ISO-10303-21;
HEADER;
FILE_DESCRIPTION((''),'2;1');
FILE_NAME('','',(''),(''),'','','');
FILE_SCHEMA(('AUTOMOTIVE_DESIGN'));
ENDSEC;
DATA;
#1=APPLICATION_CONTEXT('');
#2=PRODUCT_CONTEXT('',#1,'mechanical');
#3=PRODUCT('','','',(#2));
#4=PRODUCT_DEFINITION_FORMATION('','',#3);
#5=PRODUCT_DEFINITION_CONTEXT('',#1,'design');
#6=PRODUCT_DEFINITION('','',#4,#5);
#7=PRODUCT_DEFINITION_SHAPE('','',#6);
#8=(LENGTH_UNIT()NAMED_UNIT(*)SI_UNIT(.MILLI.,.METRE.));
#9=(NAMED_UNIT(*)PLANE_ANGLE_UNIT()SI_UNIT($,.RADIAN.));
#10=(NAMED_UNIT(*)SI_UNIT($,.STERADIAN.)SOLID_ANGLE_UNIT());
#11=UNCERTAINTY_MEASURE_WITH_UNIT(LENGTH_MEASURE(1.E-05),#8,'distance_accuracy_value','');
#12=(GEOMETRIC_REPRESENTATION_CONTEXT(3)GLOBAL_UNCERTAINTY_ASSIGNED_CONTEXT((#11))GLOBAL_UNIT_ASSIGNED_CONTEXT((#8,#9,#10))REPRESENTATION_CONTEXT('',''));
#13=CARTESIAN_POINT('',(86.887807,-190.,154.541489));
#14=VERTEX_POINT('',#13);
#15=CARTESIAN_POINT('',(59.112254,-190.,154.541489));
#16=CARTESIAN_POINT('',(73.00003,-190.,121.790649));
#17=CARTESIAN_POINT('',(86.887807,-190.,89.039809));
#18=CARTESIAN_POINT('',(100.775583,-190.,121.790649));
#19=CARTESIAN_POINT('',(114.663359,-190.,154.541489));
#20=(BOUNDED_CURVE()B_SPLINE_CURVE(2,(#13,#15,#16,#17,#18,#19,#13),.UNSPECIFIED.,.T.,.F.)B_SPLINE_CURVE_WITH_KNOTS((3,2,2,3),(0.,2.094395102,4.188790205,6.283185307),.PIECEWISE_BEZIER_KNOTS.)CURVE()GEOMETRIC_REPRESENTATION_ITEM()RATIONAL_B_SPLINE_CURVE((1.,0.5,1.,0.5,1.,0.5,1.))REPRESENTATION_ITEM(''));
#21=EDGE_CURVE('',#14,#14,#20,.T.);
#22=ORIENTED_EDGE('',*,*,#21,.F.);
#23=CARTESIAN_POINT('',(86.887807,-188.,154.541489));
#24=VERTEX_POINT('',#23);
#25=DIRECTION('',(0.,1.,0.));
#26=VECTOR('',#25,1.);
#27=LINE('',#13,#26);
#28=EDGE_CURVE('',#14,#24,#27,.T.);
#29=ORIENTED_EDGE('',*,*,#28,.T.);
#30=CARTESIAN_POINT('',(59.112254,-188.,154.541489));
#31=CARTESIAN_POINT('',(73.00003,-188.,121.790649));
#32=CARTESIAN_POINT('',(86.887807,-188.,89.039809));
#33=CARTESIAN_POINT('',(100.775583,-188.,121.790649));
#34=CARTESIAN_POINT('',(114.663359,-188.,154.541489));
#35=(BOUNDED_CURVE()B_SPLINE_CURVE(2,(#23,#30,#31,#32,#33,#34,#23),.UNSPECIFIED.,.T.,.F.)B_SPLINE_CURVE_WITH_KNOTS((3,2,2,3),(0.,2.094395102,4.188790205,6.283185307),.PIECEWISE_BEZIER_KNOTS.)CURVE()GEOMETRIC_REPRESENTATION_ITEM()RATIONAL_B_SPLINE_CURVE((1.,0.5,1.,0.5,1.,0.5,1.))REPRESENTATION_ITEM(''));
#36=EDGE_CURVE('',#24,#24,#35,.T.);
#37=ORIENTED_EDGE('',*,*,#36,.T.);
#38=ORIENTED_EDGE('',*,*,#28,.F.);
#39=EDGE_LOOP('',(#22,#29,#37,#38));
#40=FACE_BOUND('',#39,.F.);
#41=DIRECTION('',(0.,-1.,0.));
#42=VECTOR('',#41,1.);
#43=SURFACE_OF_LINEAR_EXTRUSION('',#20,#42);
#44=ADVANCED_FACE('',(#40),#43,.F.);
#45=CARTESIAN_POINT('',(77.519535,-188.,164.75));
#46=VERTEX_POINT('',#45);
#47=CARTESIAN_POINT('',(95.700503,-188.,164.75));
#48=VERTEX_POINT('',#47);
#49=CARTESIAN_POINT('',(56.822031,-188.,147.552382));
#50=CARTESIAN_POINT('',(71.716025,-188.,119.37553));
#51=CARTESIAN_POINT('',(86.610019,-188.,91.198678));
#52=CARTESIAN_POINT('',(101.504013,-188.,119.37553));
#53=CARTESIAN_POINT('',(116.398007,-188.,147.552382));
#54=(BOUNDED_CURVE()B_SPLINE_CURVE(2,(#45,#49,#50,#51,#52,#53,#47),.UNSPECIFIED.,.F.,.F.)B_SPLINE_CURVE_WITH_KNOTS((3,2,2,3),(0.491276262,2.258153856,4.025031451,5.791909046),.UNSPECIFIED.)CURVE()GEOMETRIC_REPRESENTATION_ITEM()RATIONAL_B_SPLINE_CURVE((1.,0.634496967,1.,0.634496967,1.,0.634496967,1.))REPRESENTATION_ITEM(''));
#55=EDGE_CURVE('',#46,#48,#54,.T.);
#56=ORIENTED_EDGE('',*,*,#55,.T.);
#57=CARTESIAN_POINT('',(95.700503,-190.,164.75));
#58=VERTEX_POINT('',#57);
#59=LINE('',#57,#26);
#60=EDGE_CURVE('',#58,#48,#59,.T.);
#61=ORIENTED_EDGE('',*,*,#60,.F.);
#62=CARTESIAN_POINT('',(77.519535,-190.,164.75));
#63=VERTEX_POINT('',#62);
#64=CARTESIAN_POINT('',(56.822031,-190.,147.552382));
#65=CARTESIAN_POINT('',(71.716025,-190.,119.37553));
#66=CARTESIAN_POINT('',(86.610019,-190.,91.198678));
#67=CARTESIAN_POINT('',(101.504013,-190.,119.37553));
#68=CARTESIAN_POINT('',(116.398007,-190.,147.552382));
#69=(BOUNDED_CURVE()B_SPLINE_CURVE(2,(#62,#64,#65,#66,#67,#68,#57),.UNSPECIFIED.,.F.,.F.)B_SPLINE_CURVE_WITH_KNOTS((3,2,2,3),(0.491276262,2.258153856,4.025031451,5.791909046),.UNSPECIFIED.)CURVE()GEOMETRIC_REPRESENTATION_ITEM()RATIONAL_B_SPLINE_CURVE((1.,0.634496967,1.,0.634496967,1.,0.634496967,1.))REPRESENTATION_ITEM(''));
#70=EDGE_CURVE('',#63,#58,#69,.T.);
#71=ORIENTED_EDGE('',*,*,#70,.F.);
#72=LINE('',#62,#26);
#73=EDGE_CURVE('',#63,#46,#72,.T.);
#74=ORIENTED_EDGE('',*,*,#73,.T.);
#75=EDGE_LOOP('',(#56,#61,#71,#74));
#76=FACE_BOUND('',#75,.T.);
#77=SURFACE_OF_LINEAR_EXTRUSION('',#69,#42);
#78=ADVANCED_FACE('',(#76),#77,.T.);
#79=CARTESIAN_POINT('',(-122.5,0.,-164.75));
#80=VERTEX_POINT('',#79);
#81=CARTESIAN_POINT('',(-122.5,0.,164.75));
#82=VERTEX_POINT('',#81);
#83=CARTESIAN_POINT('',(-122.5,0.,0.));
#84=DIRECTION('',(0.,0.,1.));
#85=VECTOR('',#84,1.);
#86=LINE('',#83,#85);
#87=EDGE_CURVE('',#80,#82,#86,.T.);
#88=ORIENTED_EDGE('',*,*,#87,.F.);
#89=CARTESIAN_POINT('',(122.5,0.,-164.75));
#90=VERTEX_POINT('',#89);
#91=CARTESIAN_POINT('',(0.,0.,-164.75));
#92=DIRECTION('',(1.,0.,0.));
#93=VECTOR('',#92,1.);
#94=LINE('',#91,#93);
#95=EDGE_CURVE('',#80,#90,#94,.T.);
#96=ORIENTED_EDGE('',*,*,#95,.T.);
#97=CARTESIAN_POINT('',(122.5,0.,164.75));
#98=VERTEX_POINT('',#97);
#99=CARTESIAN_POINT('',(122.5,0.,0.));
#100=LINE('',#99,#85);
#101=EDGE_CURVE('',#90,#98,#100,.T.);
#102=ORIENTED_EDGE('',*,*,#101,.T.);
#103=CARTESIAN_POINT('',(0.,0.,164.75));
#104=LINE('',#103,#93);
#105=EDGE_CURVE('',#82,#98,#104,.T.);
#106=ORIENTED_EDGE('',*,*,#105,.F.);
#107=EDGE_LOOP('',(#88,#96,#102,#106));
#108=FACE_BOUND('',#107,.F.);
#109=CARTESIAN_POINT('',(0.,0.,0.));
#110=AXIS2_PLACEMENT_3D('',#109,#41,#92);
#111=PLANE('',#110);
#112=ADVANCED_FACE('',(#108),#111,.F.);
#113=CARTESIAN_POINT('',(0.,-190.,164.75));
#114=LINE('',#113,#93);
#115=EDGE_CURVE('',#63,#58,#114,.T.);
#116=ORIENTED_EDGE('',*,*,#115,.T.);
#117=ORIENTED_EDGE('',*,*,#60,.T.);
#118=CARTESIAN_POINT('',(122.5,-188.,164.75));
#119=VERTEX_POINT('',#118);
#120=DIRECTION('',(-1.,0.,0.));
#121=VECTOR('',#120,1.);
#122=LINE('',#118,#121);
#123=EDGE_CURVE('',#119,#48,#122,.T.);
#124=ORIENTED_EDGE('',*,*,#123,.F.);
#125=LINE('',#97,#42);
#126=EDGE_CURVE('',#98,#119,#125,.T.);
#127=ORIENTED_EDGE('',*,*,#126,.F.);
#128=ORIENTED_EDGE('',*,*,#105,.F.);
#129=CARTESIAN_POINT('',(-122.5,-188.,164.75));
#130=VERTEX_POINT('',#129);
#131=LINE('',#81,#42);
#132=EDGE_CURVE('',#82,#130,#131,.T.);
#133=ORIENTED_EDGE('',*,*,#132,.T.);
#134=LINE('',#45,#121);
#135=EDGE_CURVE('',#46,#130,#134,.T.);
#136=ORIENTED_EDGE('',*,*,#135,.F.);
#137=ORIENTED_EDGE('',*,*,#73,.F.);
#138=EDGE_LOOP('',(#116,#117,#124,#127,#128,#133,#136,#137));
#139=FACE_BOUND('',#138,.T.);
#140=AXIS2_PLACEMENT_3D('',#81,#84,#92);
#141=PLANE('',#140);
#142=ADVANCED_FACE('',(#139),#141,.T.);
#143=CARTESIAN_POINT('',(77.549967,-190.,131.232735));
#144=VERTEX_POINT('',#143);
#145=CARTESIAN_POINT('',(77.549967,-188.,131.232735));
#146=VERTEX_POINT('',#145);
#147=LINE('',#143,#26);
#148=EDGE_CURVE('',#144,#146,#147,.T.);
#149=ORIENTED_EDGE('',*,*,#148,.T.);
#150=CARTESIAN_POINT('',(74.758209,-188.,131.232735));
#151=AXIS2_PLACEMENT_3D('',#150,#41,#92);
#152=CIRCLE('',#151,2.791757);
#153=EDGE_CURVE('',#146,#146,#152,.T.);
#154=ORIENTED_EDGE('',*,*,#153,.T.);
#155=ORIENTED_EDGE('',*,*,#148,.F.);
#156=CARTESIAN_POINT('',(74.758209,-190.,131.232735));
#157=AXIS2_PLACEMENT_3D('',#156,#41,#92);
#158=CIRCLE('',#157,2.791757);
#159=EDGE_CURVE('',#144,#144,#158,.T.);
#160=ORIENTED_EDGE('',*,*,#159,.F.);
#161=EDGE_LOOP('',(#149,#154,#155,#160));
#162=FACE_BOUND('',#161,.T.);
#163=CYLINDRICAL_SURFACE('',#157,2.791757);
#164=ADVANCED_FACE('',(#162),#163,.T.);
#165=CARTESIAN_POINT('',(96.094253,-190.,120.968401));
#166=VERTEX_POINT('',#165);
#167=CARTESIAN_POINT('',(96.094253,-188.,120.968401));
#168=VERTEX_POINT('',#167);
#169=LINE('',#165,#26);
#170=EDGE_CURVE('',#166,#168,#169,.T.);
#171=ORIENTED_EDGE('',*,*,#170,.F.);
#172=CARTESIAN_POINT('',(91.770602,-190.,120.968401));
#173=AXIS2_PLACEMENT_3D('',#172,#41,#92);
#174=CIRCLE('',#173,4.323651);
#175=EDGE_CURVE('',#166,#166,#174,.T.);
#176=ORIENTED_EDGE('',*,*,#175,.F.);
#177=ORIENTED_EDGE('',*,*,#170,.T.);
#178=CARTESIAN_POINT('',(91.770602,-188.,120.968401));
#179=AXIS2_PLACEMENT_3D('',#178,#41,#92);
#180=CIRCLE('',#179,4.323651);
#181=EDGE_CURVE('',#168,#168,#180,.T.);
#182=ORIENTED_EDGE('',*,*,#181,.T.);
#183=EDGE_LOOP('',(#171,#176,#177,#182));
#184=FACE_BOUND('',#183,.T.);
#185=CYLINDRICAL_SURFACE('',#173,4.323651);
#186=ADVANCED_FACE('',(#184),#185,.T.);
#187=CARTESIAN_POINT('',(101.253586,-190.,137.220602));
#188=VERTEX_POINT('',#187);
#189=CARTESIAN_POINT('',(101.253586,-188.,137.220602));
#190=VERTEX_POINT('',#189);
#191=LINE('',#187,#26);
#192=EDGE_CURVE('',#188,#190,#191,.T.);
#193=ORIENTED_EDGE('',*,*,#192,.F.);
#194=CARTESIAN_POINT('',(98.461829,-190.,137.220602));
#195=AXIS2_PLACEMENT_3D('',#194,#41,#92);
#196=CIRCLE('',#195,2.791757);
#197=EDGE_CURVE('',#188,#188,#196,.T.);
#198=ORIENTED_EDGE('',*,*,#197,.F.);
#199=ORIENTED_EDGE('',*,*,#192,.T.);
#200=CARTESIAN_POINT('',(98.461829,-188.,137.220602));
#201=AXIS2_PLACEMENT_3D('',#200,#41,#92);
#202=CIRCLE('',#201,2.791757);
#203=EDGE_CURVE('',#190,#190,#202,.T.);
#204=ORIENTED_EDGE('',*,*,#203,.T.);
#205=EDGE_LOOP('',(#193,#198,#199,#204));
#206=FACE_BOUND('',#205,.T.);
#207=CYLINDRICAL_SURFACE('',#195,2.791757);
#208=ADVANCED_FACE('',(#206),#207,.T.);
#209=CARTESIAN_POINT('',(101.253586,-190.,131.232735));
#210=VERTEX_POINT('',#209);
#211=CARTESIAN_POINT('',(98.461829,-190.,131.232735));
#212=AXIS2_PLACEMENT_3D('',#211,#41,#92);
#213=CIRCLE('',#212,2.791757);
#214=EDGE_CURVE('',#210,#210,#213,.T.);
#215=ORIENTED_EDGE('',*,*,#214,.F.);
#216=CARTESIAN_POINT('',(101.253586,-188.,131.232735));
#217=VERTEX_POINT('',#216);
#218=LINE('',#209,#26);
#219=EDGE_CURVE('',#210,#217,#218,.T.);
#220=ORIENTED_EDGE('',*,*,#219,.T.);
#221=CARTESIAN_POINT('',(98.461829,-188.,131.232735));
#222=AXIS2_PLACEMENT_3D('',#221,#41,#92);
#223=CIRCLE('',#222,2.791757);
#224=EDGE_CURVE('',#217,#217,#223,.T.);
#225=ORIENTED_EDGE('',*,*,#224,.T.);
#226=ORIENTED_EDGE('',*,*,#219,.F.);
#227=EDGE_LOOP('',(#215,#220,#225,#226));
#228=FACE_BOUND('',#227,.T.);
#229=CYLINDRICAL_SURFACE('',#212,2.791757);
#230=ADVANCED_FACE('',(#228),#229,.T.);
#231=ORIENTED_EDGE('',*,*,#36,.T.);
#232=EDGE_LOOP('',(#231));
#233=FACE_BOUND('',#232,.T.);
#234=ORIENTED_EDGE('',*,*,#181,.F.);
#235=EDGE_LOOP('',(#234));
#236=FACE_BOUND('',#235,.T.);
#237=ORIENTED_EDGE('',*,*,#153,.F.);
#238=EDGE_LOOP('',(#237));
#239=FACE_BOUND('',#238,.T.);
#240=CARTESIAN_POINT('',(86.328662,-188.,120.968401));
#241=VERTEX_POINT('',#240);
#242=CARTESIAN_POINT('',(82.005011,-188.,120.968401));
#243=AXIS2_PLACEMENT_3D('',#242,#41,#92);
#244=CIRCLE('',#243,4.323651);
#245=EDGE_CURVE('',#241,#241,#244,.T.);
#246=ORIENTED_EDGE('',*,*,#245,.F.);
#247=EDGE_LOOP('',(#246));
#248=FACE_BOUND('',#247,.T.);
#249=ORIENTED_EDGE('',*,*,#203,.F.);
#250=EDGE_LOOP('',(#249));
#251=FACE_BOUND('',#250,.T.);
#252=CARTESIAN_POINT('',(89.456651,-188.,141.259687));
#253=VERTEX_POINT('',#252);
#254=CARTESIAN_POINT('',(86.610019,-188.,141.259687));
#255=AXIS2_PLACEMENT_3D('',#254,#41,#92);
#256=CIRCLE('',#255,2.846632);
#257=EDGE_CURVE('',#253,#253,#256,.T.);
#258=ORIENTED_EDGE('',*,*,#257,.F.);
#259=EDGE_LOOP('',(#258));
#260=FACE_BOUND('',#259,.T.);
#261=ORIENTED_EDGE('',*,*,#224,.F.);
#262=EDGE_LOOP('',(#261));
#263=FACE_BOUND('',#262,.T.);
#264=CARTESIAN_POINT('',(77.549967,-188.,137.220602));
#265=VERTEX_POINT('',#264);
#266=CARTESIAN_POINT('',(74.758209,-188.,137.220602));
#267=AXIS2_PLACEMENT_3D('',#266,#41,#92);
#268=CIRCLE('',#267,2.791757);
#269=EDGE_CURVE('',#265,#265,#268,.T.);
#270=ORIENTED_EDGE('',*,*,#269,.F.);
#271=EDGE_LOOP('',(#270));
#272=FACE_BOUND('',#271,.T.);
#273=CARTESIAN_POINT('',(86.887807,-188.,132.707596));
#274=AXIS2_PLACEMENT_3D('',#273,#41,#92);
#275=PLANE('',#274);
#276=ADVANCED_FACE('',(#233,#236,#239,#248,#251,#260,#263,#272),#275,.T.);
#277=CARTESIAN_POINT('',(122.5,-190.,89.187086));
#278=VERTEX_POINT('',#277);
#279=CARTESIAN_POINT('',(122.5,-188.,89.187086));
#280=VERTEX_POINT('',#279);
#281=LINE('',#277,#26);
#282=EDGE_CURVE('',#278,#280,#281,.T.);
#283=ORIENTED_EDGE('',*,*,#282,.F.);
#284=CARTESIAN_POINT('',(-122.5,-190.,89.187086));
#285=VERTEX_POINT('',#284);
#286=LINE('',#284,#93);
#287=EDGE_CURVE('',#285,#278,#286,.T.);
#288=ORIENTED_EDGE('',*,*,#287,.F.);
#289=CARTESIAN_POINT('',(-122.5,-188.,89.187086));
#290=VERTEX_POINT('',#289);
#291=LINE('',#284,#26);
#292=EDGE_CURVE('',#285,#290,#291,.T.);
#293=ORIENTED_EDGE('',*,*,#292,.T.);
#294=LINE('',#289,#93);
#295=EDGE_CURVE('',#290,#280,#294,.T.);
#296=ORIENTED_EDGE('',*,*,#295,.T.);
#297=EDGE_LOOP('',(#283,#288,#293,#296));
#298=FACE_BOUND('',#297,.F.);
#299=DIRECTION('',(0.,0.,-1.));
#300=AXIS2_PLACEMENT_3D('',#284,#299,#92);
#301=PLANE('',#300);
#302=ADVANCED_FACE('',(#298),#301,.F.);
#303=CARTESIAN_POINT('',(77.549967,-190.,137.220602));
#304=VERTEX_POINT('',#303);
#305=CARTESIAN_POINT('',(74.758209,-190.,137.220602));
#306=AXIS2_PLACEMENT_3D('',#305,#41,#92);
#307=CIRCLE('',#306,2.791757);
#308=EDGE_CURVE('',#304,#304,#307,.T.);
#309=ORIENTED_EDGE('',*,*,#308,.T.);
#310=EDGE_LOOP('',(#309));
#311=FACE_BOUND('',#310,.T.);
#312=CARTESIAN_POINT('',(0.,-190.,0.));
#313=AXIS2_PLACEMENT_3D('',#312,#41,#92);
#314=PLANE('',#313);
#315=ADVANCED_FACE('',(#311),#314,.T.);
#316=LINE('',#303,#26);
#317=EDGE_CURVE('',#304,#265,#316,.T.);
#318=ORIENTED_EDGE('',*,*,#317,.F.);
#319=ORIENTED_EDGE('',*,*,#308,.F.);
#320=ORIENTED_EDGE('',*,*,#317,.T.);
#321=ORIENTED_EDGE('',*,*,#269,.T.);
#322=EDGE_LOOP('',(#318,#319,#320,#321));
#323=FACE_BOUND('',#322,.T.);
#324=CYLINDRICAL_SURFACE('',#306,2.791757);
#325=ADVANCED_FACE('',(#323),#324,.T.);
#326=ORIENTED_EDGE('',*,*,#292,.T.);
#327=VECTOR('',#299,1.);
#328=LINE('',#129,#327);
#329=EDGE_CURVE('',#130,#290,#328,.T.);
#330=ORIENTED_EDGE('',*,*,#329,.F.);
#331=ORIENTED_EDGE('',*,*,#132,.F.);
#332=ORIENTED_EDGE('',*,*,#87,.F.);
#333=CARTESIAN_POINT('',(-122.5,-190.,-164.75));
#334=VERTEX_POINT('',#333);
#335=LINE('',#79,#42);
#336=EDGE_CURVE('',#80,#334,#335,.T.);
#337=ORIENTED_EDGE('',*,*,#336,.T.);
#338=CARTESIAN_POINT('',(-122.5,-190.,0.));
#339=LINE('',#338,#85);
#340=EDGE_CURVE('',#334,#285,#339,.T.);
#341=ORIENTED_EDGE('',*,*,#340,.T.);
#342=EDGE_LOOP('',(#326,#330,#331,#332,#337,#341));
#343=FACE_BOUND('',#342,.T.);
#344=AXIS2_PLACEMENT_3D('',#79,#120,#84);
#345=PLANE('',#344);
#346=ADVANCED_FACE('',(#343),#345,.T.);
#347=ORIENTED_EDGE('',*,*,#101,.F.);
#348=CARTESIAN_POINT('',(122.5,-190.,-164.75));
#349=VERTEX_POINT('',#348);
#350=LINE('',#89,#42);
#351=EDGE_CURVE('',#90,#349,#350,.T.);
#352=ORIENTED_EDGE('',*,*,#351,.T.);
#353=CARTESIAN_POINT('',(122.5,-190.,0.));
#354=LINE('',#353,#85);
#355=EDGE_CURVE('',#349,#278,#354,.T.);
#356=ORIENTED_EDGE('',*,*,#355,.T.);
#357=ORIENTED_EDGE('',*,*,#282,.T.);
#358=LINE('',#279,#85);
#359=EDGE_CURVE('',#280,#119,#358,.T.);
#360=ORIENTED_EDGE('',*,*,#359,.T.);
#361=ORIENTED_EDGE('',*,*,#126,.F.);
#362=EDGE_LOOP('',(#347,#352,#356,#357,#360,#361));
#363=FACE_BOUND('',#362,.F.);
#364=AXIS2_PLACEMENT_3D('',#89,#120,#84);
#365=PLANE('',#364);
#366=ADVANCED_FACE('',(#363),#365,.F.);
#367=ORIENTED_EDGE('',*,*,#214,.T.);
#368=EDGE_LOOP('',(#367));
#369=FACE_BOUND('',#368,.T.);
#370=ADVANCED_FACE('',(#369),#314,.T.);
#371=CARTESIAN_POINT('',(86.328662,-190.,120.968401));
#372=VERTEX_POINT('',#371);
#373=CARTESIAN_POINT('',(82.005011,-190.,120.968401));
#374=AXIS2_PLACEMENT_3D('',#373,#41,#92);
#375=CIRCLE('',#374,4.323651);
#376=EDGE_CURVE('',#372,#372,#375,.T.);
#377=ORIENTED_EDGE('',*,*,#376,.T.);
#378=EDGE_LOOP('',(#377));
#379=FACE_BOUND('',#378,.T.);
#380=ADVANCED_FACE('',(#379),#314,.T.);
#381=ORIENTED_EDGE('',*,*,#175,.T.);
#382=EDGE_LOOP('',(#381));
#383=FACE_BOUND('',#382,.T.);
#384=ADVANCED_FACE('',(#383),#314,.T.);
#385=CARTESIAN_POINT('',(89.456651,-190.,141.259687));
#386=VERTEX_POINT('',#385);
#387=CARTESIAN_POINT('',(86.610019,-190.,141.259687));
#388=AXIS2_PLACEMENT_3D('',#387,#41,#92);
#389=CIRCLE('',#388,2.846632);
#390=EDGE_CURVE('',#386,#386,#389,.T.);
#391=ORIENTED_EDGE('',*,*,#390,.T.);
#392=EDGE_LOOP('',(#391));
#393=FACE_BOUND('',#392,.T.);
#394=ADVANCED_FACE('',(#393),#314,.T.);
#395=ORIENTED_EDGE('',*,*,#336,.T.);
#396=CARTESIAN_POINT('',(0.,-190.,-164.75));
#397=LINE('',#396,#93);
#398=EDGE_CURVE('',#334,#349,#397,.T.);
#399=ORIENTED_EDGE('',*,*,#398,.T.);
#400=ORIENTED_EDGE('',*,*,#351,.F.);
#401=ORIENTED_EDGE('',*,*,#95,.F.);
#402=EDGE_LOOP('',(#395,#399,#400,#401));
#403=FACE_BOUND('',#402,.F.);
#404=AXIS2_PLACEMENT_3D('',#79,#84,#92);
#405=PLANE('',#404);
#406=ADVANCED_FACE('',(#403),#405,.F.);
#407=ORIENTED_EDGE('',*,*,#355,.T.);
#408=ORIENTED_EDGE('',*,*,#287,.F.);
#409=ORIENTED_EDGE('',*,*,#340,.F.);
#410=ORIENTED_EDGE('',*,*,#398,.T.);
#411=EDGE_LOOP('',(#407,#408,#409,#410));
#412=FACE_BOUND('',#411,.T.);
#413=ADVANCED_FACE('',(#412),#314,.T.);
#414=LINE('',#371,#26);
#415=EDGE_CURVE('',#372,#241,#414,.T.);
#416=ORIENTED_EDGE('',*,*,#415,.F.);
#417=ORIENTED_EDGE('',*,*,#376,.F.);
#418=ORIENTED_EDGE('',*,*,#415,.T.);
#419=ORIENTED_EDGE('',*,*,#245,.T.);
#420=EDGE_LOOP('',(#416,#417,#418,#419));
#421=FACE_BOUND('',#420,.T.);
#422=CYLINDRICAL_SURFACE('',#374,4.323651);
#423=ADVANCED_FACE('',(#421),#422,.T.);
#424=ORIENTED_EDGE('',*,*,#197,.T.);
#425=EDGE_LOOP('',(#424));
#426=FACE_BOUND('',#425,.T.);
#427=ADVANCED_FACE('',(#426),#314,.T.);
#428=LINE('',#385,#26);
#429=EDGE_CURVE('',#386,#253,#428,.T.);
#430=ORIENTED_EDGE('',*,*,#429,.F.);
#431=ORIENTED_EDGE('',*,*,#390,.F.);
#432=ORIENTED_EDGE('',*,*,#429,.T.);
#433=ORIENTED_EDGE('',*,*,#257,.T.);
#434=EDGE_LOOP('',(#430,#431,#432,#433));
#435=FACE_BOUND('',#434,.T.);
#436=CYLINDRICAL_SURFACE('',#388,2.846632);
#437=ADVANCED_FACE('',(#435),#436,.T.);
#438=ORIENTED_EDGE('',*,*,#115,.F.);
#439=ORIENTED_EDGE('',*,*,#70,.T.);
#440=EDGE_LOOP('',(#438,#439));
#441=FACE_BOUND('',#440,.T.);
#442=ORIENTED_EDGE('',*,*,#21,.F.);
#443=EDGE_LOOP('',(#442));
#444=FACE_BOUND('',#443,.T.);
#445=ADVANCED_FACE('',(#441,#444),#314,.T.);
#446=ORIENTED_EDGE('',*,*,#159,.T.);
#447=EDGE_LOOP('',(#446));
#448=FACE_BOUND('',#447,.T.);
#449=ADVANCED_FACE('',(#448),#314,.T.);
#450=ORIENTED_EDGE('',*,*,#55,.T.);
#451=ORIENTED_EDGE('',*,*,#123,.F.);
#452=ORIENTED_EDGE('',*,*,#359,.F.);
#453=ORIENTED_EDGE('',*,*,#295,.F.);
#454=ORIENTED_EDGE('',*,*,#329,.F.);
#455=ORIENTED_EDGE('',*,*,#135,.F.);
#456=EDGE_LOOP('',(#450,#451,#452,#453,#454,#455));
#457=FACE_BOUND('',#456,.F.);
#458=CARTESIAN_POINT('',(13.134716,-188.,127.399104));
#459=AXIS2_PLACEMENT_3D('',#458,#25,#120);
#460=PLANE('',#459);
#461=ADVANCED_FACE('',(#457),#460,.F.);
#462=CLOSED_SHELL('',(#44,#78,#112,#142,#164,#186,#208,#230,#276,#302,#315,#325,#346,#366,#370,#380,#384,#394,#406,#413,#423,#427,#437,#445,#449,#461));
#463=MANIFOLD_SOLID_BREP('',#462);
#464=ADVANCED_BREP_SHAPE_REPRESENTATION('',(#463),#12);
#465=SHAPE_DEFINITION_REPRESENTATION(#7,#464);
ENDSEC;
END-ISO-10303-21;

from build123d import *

# Parameters (mm, degrees)
F0_W     = 245
F0_H     = 329.5
F1_DEPTH = 190
F2_R     = 4.3236508832
F2_R_2   = 2.7917572167
F2_R_3   = 2.8466316253
F3_DEPTH = 2


# Not quite as in the source:
# - a feature names something its author has since deleted; it is built from what else it names


with BuildPart() as f1:
    # F0 (on Front) → F1 (new body)
    with BuildSketch(Plane.XZ):
        Rectangle(F0_W, F0_H)
    extrude(amount=F1_DEPTH)

    # F2 (on face) → F3 (cut)
    with BuildSketch(Plane.XZ.offset(190)):
        with BuildLine():
            add(Edge.make_bspline(
                [(86.887806654, 154.5414891056), (59.1122539749, 154.5414891056), (73.0000303144, 121.790649185), (86.887806654, 89.0398092644), (100.7755829935, 121.790649185), (114.6633593331, 154.5414891056), (86.887806654, 154.5414891056)],
                knots=[0, 0, 0, 2.0943951024, 2.0943951024, 4.1887902048, 4.1887902048, 6.2831853072, 6.2831853072, 6.2831853072], degree=2, weights=[1, 0.5, 1, 0.5, 1, 0.5, 1]))
        make_face()
        with Locations((82.0050109178, 120.968401432)):
            Circle(F2_R, mode=Mode.SUBTRACT)
        with Locations((91.7706023902, 120.968401432)):
            Circle(F2_R, mode=Mode.SUBTRACT)
        with Locations((74.7582092881, 131.2327347696)):
            Circle(F2_R_2, mode=Mode.SUBTRACT)
        with Locations((74.7582092881, 137.2206024826)):
            Circle(F2_R_2, mode=Mode.SUBTRACT)
        with Locations((86.610019207, 141.2596870214)):
            Circle(F2_R_3, mode=Mode.SUBTRACT)
        with Locations((98.4618291259, 131.2327347696)):
            Circle(F2_R_2, mode=Mode.SUBTRACT)
        with Locations((98.4618291259, 137.2206024826)):
            Circle(F2_R_2, mode=Mode.SUBTRACT)
        with BuildLine():
            add(Edge.make_bspline(
                [(77.5195354487, 164.75), (56.8220313431, 147.5523822091), (71.7160252751, 119.3755302582), (86.610019207, 91.1986783073), (101.5040131389, 119.3755302582), (116.3980070709, 147.5523822091), (95.7005029653, 164.75)],
                knots=[0.4912762616, 0.4912762616, 0.4912762616, 2.2581538563, 2.2581538563, 4.0250314509, 4.0250314509, 5.7919090456, 5.7919090456, 5.7919090456], degree=2, weights=[1, 0.6344969674, 1, 0.6344969674, 1, 0.6344969674, 1]))
            Line((77.5195354487, 164.75), (-122.5, 164.75))
            Line((-122.5, 164.75), (-122.5, 89.1870856285))
            Line((-122.5, 89.1870856285), (122.5, 89.1870856285))
            Line((122.5, 89.1870856285), (122.5, 164.75))
            Line((122.5, 164.75), (95.7005029653, 164.75))
        make_face()
    extrude(amount=-F3_DEPTH, mode=Mode.SUBTRACT)


solid = f1.part
